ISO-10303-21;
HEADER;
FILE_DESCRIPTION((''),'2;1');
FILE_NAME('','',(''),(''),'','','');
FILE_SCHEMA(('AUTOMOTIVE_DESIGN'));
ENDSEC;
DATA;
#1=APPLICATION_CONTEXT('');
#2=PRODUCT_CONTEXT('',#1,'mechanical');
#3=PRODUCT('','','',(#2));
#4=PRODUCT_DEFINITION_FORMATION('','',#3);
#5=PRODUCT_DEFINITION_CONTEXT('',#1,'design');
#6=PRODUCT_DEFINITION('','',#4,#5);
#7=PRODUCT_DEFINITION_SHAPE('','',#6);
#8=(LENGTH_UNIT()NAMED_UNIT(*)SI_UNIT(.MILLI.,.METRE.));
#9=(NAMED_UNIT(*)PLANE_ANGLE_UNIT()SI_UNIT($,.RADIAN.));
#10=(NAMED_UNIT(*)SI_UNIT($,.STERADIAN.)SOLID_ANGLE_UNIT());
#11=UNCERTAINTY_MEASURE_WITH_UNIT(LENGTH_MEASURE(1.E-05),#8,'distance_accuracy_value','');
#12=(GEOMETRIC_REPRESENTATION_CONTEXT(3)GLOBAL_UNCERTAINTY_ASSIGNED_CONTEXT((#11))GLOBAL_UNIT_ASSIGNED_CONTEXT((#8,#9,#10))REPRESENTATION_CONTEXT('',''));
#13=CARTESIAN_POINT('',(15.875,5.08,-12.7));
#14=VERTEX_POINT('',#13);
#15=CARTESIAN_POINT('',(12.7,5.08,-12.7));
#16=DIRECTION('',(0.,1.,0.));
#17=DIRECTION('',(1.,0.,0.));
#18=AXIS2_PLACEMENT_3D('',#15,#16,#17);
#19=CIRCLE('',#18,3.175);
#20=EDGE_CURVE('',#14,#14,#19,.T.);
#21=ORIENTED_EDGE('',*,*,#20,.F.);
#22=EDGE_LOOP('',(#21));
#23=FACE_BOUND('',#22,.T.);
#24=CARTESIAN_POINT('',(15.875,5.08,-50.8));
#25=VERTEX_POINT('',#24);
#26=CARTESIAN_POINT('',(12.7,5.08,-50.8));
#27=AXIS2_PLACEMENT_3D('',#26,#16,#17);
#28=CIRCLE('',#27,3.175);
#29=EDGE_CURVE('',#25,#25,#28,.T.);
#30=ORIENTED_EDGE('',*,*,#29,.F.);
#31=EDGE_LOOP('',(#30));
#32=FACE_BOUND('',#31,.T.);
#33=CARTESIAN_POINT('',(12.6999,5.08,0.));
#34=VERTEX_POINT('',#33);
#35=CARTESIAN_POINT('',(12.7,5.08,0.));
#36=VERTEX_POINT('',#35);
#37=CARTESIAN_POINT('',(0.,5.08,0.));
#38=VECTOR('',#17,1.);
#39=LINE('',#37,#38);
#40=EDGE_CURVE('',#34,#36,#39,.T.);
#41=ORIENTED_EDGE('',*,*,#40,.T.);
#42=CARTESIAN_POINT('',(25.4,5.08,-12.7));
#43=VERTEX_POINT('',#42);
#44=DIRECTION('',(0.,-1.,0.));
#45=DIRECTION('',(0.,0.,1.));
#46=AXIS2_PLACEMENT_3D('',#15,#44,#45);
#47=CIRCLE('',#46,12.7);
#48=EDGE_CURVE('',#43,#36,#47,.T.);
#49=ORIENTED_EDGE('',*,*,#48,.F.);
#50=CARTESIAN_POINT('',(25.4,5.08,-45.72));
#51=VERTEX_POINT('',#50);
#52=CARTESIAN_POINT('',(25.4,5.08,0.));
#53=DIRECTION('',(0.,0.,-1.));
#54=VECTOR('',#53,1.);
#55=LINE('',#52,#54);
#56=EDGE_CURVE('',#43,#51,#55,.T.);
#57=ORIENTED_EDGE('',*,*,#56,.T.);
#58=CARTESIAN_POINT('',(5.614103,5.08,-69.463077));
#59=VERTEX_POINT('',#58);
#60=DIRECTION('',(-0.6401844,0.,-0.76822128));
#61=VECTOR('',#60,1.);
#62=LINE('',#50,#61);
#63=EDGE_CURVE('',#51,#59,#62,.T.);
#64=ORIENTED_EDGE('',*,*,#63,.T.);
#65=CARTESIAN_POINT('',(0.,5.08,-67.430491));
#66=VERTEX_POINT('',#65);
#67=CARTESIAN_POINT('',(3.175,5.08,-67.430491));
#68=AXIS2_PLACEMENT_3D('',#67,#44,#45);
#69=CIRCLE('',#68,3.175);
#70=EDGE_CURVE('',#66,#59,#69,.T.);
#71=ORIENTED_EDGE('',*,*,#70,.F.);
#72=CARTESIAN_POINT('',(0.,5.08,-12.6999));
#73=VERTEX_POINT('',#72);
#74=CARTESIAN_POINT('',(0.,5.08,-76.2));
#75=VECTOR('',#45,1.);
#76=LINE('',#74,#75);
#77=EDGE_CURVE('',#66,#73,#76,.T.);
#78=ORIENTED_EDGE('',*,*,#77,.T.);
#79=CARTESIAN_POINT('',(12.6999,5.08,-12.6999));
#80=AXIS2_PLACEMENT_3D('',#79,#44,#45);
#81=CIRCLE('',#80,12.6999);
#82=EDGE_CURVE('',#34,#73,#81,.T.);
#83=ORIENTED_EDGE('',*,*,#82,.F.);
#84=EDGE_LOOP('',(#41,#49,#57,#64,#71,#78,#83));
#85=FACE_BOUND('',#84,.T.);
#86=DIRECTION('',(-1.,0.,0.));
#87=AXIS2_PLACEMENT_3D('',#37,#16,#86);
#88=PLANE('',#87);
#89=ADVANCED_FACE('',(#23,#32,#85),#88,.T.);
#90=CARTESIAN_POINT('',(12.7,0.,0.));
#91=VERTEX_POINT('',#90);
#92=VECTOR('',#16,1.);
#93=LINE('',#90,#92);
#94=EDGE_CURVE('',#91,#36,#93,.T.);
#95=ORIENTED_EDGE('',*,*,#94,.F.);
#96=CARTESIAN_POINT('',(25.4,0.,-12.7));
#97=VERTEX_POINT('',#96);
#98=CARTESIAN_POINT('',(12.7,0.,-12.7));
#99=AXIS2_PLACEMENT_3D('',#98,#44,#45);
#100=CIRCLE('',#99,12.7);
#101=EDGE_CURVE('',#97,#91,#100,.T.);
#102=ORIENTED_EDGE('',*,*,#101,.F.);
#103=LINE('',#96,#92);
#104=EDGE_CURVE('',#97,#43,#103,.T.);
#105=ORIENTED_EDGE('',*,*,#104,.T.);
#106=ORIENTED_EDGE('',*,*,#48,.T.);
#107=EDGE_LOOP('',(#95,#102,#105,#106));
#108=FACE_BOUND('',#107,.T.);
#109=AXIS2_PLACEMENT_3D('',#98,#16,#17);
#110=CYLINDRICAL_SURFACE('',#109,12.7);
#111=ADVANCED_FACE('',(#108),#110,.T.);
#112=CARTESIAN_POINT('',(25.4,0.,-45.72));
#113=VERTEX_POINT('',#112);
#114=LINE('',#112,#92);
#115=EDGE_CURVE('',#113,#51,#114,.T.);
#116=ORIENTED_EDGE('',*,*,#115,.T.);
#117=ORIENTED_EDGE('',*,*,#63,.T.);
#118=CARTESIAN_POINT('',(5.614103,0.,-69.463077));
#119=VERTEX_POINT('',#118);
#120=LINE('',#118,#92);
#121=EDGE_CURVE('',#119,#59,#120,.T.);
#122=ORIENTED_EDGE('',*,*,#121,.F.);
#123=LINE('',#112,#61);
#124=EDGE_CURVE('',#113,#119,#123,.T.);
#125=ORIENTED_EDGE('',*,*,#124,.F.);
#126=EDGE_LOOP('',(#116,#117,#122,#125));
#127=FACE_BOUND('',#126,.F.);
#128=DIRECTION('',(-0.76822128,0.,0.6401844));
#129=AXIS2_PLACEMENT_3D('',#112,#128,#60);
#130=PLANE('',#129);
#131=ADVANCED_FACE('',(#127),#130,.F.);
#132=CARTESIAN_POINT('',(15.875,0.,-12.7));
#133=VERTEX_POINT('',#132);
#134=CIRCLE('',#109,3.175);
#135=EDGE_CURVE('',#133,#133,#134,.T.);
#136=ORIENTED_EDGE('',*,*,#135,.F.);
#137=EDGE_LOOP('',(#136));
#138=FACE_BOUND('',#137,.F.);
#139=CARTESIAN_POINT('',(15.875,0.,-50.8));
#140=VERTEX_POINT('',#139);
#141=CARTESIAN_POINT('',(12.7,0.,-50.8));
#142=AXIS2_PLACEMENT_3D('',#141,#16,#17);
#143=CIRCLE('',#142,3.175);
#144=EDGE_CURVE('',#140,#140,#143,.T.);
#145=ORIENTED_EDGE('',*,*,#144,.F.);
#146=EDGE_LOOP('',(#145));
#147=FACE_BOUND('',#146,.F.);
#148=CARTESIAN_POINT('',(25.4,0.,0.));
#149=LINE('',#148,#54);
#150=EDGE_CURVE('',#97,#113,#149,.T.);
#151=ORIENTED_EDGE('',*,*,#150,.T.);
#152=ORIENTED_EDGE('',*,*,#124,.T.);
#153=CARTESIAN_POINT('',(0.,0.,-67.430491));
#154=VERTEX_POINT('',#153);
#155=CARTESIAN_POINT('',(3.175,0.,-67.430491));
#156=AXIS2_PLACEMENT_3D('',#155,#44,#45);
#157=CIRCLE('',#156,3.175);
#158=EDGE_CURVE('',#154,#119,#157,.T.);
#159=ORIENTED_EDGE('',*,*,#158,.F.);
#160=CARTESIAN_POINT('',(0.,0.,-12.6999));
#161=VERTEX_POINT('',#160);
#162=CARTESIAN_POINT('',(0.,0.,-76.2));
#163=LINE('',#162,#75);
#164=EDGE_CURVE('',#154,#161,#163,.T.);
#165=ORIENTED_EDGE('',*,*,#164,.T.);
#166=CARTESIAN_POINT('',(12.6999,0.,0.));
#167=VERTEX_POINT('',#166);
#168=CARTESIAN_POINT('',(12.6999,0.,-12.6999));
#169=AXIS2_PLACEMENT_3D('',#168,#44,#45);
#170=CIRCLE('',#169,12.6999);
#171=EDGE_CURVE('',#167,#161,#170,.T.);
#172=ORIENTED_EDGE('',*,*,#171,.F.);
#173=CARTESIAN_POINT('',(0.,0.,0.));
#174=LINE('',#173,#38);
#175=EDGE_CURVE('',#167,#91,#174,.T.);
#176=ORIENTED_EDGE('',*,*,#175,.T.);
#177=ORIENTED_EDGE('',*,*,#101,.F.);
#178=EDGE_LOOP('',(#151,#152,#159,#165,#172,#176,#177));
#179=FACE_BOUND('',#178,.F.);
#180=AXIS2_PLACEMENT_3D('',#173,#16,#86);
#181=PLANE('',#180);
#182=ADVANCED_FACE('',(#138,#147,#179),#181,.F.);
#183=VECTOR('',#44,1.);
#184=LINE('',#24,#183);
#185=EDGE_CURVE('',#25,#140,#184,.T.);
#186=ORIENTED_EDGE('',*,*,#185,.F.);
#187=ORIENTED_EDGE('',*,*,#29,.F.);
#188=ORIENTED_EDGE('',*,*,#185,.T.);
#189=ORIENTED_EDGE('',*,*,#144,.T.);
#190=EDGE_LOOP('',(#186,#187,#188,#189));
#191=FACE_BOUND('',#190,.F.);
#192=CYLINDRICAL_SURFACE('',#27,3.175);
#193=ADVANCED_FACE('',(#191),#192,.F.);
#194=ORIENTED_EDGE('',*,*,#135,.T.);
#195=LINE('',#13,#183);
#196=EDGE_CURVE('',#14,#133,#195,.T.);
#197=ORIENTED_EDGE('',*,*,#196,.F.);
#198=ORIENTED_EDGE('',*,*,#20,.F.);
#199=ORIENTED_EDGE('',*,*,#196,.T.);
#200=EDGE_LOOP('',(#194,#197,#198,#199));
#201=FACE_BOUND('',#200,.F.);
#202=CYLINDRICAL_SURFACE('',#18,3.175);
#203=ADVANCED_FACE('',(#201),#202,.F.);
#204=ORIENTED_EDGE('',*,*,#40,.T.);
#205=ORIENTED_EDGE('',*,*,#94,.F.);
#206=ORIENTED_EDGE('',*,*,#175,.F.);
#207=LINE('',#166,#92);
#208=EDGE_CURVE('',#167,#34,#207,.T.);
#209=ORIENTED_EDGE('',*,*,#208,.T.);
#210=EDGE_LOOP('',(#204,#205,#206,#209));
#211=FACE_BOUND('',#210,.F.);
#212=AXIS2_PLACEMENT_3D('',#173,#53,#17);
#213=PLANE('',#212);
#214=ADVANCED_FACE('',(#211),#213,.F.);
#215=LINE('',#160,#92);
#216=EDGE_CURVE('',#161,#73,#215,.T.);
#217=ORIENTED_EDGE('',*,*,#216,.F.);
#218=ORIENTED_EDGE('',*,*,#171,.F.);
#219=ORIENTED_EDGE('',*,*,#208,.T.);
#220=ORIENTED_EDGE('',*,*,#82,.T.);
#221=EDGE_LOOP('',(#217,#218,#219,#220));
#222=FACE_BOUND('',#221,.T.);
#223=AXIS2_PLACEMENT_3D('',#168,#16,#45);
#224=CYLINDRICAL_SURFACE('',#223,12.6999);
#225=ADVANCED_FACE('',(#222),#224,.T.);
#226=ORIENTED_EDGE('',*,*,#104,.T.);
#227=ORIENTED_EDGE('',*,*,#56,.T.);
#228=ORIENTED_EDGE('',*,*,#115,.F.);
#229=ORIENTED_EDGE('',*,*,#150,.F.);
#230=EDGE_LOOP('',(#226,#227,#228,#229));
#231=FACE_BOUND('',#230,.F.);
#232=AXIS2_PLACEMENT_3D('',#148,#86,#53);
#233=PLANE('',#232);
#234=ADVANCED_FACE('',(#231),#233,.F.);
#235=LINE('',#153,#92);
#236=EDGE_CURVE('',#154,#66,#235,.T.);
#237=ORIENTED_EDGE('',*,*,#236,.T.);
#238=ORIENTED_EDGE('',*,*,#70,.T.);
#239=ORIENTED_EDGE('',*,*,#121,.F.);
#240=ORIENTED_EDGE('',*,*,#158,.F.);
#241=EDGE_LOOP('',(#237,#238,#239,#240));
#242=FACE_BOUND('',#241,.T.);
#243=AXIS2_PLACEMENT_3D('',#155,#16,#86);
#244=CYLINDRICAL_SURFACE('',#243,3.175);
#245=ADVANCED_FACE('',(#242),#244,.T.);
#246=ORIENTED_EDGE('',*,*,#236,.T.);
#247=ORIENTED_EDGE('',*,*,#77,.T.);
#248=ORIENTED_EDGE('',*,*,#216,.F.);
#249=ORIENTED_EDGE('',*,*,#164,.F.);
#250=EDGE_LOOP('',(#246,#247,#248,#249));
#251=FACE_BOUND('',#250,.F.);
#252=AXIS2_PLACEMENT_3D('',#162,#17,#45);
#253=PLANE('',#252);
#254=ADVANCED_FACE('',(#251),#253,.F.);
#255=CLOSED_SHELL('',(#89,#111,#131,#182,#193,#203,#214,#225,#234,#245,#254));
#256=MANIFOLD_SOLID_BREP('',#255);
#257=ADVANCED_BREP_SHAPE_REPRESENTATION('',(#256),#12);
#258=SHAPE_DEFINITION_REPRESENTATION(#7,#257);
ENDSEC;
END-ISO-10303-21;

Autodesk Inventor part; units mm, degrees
ref_plane "YZ Plane" through (0, 0, 0) normal (1, 0, 0) x (0, 1, 0)
ref_plane "XZ Plane" through (0, 0, 0) normal (0, 1, 0) x (-1, 0, 0)
ref_plane "XY Plane" through (0, 0, 0) normal (0, 0, 1) x (1, 0, 0)
sketch "Sketch1" plane through (0, 0, 0) normal (0, 1, 0) x (-1, 0, 0)
  line L0 (0, 0) -> (-25.4, 0)
  line L1 (-25.4, 0) -> (-25.4, -45.72)
  line L2 (0, -76.2) -> (0, 0)
  line L3 (-25.4, 0) -> (-25.4, -45.72)
  line L4 (-25.4, -45.72) -> (0, -76.2)
  point P0 (0, -76.2)
  dimension "d2" = 45.72
  dimension "d22" = 25.4
  dimension "d23" = 76.2
extrude "Extrusion1" add sketch "Sketch1" along normal blind 5.08
fillet "Fillet2" radius 12.7 1 edges at (25.4, 2.54, 0)
fillet "Fillet3" radius 12.7 1 edges at (0, 2.54, 0)
sketch "Sketch2" plane through (0, 5.08, 0) normal (0, 1, 0) x (1, 0, 0)
  circle A0 centre (12.7, 12.7) radius 3.175
  circle A1 centre (12.7, 50.8) radius 3.175
  point P0 (0, 0)
  dimension "d9" = 6.35
  dimension "d10" = 12.7
  dimension "d11" = 12.7
  dimension "d16" = 6.35
  dimension "d17" = 38.1
  dimension "d18" = 12.7
extrude "Extrusion2" cut sketch "Sketch2" against normal blind 12.7
fillet "Fillet6" radius 3.175 1 edges at (0, 2.54, -76.2)
properties part number "Finger"
